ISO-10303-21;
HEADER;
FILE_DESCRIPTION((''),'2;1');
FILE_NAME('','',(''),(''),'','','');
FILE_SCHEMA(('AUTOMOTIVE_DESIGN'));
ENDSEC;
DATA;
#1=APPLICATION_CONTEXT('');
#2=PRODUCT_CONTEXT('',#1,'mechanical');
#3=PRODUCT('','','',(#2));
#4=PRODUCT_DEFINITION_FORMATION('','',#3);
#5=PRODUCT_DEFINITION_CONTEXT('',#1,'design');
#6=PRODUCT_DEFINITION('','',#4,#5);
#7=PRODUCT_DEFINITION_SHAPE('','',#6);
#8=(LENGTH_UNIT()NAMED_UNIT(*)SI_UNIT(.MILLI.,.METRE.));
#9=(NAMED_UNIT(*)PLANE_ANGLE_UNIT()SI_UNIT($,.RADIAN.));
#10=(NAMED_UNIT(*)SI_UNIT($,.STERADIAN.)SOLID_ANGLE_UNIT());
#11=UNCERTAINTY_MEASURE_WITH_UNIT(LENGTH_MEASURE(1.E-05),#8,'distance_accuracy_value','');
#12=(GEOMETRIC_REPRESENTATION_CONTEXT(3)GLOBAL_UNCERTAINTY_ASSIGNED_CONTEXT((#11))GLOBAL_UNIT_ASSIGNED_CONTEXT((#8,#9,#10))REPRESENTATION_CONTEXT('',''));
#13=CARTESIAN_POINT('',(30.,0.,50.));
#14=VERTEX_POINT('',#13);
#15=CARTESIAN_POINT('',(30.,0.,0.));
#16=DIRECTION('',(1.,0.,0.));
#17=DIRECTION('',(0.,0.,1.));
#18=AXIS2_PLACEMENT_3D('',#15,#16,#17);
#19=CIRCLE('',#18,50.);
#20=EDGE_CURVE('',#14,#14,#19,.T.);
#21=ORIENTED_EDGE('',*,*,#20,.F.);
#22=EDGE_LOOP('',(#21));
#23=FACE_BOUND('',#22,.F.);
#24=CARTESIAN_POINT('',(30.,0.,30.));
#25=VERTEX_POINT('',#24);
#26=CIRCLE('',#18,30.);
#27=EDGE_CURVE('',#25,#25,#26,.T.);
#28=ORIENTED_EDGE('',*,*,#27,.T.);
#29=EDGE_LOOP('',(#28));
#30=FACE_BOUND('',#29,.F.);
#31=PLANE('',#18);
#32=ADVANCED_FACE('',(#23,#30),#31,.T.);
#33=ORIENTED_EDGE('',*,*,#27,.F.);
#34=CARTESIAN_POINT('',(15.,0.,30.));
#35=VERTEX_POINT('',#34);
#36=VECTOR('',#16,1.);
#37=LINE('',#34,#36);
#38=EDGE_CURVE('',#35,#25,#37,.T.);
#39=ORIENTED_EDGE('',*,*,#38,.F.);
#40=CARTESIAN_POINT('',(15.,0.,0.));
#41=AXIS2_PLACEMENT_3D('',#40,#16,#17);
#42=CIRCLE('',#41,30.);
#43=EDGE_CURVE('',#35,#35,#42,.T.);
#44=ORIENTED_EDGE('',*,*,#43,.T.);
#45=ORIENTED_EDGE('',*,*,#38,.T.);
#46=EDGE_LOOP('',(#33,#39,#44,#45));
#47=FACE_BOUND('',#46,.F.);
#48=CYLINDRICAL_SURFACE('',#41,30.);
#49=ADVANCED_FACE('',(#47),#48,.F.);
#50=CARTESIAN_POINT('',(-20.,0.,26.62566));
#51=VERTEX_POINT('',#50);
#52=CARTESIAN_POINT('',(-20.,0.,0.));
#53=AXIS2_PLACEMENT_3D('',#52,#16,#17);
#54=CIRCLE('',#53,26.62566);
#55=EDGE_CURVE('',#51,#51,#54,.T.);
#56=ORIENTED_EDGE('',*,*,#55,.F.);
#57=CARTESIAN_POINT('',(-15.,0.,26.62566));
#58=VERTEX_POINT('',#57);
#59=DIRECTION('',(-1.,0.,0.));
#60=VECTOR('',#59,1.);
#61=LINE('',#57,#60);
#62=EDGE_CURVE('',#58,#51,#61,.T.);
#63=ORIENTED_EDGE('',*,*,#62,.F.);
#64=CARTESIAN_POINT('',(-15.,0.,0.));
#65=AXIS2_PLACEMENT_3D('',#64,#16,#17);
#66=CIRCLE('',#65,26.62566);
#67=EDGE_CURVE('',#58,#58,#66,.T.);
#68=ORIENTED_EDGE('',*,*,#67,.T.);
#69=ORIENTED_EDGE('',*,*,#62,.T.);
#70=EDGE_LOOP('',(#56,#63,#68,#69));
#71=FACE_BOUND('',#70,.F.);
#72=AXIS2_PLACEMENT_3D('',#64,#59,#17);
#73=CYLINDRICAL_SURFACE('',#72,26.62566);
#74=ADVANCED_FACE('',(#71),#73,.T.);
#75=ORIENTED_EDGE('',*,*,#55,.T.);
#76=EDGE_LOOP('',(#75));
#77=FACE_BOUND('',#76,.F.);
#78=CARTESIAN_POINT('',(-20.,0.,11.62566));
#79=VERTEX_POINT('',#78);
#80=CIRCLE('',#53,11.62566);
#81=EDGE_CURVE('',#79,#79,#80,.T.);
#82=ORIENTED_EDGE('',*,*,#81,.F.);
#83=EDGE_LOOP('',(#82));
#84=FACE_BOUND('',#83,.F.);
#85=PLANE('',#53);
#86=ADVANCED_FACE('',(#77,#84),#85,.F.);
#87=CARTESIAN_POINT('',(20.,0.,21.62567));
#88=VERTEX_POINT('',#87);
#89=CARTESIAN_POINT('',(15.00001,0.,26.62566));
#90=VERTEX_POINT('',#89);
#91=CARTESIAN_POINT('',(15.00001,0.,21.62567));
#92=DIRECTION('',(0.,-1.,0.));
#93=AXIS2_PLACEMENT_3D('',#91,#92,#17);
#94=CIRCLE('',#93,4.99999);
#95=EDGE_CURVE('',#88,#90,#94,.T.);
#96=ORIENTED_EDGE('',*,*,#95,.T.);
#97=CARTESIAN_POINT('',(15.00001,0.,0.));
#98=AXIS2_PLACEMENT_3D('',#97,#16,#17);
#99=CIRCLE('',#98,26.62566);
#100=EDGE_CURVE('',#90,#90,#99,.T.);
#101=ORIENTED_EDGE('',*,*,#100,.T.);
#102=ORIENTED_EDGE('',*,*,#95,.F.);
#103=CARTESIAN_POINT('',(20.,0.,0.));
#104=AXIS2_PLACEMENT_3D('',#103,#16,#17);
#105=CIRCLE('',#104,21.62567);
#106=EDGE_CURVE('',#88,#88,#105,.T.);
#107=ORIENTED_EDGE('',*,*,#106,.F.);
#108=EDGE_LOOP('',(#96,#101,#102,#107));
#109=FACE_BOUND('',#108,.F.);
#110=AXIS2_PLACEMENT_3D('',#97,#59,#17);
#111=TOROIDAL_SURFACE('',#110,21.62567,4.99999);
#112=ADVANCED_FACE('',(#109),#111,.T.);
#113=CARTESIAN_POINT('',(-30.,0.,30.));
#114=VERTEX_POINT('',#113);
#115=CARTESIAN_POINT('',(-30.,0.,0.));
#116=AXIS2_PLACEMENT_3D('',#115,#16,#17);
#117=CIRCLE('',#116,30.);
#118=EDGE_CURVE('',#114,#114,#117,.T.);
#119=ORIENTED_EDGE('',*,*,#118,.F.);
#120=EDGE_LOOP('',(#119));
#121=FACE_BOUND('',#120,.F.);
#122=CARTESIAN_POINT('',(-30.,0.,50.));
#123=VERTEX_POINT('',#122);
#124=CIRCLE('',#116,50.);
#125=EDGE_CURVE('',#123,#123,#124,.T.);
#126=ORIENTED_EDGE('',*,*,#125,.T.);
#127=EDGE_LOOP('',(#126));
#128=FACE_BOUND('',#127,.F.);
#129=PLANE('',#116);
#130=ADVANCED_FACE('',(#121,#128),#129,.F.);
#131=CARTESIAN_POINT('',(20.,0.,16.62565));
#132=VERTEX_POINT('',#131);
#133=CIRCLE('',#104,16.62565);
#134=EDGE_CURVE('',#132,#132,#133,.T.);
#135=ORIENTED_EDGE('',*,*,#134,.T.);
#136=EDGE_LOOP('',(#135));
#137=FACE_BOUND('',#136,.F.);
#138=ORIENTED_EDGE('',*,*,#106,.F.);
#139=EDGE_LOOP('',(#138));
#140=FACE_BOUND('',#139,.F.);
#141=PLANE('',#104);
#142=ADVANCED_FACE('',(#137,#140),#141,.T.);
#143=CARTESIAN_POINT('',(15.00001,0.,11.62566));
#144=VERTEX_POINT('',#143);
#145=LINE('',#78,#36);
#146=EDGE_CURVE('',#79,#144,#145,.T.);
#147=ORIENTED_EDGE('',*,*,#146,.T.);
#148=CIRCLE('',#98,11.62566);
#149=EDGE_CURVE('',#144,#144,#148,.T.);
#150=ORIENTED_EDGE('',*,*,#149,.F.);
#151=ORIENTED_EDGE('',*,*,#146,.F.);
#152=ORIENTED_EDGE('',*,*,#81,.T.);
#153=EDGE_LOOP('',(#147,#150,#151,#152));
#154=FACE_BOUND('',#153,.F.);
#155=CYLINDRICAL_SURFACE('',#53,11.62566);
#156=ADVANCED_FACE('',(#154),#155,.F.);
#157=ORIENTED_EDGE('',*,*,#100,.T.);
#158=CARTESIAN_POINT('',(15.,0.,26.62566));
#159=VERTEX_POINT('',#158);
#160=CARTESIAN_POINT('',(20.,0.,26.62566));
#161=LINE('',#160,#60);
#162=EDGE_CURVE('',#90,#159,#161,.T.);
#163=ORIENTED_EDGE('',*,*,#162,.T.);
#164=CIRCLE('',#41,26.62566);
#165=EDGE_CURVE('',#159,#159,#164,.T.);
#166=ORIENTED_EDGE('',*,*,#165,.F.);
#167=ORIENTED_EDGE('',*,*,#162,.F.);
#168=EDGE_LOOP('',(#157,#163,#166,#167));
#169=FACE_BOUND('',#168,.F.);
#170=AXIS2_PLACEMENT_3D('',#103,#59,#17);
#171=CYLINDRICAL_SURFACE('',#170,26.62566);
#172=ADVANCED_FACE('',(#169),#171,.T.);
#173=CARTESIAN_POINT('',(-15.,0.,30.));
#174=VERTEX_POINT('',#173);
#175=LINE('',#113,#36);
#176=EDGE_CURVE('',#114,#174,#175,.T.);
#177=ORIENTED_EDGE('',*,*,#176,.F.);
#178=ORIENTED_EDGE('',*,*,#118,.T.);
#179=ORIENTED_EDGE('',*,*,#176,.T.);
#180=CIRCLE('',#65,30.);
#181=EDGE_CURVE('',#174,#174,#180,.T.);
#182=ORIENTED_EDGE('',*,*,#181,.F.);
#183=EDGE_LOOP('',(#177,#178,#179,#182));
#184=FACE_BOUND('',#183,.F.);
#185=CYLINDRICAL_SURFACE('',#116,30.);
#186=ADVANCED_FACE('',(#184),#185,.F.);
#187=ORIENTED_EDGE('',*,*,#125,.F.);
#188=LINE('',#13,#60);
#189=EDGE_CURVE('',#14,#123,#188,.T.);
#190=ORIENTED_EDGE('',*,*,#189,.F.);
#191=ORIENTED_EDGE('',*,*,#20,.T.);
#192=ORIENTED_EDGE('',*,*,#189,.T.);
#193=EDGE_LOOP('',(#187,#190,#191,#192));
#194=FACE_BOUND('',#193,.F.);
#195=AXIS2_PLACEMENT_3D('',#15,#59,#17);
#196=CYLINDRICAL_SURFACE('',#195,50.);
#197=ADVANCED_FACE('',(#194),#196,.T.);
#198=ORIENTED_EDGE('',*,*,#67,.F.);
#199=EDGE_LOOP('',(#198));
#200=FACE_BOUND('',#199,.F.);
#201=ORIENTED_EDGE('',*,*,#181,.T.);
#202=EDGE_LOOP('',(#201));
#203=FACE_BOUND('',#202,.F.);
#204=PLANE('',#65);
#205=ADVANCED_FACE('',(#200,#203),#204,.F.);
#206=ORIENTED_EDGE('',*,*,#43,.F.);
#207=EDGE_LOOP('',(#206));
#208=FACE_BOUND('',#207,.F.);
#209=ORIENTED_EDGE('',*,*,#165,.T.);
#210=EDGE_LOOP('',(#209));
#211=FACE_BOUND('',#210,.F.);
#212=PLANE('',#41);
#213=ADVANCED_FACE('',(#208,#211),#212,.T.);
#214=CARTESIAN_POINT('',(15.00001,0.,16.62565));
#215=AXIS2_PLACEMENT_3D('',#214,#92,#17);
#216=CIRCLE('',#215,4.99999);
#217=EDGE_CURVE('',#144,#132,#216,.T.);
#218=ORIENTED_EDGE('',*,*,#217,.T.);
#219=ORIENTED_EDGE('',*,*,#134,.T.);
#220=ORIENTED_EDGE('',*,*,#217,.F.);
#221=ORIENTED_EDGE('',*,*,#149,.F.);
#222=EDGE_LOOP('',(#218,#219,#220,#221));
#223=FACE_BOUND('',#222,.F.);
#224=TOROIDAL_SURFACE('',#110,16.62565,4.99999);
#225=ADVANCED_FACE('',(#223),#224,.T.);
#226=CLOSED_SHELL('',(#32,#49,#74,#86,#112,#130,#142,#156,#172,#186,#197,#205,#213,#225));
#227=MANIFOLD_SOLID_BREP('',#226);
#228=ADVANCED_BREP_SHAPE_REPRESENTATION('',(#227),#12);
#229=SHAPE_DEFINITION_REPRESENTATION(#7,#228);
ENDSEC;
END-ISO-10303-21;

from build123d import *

# Parameters (mm, degrees)
F2_R = 4.99999


# Not quite as in the source:
# - a fillet or chamfer is up to 0.001 mm smaller than in the source, because OpenCascade refuses the exact size


with BuildPart() as f1:
    # F0 (on Front) → F1 (revolve)
    with BuildSketch(Plane.XZ):
        Polygon((-20, 11.6256596521), (0, 11.6256596521), (20, 11.6256596521), (20, 26.6256596521), (15, 26.6256596521), (15, 30), (30, 30), (30, 50), (0, 50), (-30, 50), (-30, 30), (-15, 30), (-15, 26.6256596521), (-20, 26.6256596521), align=None)
    revolve(axis=Axis((30.7941585779, 0, 0), (1, 0, 0)))

    # F2 (radius 5 in the source; OpenCascade refuses exactly that, so slightly less here)
    f2_edges = [f1.edges().sort_by_distance(p)[0] for p in [
        (20, 0, -11.62566),
        (20, 0, -26.62566),
    ]]
    fillet(f2_edges, radius=F2_R)


solid = f1.part
